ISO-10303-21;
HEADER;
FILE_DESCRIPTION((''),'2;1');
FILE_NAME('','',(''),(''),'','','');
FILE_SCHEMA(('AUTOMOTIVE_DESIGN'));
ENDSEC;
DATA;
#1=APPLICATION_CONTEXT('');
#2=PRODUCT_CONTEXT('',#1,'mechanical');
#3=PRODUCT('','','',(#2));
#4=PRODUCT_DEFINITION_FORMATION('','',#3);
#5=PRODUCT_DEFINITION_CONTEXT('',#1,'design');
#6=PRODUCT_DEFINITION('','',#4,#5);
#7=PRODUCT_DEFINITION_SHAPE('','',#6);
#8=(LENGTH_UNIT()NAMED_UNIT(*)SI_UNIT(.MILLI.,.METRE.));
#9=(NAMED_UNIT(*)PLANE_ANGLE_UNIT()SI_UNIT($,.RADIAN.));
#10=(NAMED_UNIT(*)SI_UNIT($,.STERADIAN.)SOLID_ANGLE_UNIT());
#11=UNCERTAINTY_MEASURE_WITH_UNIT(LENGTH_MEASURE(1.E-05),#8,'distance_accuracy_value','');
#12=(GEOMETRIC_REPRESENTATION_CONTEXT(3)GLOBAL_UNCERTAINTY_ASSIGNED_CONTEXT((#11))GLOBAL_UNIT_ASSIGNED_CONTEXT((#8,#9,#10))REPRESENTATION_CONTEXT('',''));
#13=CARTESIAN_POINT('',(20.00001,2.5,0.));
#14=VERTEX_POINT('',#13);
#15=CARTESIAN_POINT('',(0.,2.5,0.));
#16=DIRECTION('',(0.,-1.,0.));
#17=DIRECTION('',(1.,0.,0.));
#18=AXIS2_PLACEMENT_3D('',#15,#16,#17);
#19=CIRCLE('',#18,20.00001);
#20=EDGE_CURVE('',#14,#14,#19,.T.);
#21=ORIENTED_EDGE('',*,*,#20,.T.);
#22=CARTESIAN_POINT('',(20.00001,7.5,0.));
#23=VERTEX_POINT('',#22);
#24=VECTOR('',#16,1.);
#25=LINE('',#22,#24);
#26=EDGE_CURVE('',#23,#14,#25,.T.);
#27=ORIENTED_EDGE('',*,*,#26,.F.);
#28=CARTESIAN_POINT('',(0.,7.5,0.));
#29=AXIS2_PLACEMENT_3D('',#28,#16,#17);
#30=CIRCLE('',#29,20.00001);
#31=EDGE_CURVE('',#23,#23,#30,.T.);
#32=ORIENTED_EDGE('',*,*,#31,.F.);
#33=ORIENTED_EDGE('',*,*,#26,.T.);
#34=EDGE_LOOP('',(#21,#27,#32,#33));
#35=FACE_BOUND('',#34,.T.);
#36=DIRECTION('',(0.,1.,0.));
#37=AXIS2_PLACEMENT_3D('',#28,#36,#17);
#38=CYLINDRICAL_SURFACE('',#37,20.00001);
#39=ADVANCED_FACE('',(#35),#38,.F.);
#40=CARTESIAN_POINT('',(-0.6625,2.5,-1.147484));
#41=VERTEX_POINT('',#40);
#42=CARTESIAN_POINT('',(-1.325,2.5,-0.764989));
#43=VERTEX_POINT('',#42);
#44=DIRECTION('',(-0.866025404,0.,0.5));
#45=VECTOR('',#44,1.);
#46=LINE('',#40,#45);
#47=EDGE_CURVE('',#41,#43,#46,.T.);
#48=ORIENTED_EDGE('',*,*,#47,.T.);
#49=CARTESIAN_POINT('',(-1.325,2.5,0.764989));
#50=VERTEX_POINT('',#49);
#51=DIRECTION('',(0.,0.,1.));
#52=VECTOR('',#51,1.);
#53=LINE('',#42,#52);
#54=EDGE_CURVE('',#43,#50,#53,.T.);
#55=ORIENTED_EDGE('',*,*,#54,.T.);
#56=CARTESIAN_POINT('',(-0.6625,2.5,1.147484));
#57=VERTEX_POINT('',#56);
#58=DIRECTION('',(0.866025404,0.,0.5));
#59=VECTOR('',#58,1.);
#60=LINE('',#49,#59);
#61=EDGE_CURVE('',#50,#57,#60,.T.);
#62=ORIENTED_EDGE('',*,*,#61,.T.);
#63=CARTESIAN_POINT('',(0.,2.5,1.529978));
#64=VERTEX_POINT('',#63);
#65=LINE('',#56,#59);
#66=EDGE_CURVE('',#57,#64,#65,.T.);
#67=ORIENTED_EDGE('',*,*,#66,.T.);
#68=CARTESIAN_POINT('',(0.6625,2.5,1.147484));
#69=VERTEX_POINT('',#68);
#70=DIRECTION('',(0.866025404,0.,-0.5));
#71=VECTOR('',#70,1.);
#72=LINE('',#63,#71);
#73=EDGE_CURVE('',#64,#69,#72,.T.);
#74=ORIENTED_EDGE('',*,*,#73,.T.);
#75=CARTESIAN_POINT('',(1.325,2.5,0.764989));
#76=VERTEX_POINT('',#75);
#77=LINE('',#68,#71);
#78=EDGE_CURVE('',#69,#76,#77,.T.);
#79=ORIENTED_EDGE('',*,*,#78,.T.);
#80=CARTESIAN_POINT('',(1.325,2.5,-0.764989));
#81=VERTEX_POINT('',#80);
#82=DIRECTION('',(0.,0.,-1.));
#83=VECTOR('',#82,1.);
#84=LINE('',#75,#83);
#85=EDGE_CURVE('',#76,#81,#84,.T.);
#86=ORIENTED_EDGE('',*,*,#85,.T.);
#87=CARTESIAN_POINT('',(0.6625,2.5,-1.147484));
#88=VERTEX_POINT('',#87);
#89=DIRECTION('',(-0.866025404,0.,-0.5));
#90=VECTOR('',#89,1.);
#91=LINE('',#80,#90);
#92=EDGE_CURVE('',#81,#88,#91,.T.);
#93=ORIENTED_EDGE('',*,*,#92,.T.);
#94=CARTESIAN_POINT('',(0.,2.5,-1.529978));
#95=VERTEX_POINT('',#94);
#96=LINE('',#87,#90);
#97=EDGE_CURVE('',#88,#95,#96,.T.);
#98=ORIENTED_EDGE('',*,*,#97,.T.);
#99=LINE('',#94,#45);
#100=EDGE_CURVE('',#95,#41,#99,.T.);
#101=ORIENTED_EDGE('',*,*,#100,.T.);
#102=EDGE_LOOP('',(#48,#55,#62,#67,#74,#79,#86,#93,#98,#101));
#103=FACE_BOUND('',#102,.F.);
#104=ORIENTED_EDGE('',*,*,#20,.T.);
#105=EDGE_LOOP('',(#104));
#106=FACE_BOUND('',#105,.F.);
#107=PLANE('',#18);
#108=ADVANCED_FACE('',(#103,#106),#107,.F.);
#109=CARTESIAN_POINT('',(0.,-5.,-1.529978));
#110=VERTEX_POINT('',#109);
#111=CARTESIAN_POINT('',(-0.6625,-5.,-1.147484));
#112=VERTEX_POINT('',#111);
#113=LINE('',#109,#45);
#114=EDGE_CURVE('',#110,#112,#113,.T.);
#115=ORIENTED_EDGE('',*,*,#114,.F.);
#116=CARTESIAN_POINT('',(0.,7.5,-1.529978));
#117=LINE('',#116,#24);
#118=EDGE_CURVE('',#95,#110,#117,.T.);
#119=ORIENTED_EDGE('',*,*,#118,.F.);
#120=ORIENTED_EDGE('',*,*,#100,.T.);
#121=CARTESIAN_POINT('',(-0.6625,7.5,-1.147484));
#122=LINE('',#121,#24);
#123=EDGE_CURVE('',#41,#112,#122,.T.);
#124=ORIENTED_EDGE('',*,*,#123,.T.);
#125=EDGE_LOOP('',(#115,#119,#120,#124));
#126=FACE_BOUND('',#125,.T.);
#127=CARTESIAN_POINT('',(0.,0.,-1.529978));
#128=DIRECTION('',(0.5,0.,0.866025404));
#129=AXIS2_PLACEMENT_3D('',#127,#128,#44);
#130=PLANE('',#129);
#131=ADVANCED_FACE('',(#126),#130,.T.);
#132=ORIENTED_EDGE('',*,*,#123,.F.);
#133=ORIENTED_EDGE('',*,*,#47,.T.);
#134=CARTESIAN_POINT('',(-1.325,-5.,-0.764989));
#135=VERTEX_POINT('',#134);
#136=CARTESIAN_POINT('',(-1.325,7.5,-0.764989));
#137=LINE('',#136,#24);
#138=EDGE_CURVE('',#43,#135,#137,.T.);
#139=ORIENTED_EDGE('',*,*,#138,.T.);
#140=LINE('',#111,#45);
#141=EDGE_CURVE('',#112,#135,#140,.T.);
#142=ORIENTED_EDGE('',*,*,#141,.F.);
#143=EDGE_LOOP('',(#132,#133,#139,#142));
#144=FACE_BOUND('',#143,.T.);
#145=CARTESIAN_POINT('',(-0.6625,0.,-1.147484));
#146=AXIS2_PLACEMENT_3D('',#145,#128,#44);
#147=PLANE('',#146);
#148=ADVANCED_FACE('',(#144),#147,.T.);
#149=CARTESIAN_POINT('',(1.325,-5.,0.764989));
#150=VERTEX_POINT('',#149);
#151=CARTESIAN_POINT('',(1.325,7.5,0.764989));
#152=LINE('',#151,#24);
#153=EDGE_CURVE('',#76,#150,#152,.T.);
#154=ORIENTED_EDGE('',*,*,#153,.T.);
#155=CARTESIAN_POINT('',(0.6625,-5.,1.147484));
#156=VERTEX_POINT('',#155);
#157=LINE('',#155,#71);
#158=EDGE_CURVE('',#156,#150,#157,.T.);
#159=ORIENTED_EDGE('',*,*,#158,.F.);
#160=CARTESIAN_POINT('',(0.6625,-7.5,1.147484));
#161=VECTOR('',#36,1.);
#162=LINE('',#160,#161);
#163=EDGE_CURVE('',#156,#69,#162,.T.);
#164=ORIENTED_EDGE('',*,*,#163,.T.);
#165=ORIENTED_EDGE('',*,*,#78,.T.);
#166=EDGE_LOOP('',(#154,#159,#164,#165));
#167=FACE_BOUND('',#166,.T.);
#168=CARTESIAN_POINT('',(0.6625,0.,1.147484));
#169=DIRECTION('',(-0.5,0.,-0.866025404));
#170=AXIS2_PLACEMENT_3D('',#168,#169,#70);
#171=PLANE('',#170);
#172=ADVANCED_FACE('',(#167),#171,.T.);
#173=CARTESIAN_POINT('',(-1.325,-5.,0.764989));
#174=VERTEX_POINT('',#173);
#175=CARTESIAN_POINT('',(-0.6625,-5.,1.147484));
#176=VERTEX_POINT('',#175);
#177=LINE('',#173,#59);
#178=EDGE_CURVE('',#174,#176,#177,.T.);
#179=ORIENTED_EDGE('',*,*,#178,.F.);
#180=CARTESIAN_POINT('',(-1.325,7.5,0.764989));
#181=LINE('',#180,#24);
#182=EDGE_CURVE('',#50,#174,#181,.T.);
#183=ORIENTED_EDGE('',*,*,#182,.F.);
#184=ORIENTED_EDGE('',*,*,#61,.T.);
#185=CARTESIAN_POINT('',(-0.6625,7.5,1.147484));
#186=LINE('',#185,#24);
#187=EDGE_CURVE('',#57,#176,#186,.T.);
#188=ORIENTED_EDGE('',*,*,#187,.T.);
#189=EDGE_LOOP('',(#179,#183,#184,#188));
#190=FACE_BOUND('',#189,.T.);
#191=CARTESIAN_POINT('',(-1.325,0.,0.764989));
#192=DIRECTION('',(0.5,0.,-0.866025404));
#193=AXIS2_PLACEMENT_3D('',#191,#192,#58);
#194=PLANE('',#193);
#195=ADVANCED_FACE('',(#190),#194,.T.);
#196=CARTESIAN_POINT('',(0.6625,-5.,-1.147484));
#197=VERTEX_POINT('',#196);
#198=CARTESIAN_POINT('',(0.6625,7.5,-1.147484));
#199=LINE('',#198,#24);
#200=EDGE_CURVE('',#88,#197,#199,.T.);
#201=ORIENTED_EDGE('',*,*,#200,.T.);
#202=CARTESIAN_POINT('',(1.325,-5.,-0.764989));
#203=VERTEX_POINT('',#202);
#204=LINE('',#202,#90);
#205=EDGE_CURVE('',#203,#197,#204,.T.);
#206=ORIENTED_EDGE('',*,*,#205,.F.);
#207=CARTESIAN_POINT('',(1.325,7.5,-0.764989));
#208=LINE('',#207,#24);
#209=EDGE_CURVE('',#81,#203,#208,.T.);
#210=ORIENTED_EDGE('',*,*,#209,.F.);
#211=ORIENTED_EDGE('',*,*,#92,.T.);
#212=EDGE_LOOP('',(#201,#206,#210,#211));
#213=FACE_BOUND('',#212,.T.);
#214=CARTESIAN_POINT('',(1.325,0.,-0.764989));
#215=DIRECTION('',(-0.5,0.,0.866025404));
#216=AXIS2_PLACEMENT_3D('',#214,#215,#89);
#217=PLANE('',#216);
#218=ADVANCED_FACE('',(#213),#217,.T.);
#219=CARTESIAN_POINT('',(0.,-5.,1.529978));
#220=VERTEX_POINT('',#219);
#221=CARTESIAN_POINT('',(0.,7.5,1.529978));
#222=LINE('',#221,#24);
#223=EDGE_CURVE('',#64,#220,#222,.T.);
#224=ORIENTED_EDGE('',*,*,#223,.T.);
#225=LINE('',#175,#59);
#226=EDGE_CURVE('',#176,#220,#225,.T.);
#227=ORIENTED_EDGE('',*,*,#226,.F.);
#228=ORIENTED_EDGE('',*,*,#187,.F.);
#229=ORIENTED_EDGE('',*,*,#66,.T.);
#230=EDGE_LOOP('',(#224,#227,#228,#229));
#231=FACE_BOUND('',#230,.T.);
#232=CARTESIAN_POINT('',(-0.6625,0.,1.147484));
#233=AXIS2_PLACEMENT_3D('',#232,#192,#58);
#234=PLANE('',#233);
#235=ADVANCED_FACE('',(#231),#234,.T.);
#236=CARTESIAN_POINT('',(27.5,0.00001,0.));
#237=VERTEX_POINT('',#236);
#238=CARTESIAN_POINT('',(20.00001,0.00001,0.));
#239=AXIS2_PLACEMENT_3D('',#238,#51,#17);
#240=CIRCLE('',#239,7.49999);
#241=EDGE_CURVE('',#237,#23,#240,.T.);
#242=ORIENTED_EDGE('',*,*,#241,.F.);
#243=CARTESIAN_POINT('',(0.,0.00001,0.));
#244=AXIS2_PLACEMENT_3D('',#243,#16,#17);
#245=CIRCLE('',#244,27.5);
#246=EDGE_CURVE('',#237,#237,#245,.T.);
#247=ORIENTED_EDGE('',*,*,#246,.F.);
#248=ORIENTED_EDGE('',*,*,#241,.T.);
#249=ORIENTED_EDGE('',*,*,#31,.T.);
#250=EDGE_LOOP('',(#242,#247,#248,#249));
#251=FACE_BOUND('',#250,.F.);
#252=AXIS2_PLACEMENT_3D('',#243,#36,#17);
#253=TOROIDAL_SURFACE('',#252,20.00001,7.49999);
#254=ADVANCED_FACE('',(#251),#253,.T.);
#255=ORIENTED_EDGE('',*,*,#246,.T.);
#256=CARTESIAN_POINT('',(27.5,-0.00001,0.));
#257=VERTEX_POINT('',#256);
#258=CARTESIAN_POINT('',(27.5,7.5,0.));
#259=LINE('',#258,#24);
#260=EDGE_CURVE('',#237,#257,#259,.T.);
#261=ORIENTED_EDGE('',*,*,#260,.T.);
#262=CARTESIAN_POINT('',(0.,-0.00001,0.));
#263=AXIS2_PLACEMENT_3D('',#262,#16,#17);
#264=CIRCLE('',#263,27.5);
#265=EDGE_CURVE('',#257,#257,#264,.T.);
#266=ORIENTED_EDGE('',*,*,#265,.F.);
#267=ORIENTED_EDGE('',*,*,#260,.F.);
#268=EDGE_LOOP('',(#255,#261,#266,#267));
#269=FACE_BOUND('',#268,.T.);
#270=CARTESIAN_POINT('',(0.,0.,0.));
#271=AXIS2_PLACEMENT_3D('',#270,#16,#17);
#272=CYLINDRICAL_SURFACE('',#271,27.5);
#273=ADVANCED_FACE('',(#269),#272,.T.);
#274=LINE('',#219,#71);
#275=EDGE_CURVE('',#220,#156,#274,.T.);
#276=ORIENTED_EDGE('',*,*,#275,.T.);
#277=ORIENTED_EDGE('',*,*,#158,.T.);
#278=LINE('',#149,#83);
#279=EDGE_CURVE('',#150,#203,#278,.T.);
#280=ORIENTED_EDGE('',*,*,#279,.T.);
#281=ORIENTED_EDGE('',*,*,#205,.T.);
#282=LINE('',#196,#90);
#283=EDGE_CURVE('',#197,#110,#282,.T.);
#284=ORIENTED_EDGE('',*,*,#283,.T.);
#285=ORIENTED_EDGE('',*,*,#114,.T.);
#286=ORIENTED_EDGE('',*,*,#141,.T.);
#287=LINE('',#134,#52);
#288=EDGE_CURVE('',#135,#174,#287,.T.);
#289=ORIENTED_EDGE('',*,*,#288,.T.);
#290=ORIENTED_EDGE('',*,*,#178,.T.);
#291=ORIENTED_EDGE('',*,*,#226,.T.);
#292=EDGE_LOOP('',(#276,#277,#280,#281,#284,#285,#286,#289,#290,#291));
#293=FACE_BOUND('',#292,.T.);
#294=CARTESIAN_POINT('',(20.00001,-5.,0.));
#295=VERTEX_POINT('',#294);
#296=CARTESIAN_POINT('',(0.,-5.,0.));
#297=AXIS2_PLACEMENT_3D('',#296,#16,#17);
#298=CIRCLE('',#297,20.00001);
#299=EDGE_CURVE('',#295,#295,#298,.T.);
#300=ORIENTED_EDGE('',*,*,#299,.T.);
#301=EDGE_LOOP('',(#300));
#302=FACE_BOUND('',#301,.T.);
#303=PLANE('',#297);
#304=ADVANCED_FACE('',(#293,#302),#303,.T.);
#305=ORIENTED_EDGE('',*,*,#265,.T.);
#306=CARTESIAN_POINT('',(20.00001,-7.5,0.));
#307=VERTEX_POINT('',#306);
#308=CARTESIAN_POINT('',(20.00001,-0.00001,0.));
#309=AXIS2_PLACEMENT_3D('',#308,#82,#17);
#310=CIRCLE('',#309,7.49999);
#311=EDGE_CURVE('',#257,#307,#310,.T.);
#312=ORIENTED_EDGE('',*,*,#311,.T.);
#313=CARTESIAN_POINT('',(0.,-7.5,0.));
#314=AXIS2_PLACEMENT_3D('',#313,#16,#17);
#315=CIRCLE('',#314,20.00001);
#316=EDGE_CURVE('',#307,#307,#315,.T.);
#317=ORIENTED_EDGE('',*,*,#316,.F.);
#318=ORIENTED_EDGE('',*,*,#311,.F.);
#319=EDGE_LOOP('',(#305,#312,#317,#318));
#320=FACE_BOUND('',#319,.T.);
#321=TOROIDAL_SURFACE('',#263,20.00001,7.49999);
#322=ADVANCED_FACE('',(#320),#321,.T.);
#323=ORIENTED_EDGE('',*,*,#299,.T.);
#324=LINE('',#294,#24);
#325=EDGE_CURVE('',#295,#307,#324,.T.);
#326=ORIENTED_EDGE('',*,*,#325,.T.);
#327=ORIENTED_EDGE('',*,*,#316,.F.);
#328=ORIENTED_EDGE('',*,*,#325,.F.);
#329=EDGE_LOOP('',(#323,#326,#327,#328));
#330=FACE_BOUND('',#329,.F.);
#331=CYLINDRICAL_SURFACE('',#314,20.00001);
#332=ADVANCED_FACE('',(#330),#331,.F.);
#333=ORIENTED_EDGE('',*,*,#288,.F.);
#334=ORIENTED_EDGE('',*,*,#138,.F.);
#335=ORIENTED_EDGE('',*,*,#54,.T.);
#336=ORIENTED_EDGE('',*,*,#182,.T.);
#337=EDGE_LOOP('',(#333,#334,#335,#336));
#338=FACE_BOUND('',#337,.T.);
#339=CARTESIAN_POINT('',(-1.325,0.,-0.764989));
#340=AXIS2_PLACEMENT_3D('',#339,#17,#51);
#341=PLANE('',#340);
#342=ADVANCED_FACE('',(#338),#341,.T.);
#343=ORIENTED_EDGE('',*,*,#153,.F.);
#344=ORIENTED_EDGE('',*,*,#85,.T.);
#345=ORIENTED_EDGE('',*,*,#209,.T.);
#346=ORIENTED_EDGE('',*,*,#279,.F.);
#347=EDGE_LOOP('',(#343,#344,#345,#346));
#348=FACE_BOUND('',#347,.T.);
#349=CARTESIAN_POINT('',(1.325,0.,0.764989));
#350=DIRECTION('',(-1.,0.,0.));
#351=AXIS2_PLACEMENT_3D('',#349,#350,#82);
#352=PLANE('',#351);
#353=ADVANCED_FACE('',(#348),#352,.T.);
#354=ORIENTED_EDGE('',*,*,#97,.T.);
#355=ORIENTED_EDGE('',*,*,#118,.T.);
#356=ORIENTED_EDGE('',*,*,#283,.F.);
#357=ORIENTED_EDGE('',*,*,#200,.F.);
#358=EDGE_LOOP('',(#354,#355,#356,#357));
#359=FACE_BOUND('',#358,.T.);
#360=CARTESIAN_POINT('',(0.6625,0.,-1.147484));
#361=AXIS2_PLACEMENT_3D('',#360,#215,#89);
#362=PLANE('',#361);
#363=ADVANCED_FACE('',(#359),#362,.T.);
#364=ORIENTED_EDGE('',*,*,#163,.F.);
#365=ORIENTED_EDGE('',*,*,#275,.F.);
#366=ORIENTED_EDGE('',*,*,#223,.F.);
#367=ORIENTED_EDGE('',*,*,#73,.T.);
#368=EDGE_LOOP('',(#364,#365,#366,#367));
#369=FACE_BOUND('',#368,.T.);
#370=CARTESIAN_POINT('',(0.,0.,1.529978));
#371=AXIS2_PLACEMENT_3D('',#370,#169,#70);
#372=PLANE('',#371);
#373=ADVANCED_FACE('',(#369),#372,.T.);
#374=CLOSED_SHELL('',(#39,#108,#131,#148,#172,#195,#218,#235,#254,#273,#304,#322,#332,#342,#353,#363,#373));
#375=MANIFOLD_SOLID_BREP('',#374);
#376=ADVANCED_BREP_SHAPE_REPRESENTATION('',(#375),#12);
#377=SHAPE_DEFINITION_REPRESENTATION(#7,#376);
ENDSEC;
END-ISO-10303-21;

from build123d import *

# Parameters (mm, degrees)
F0_R     = 27.5
F1_DEPTH = 7.5
F2_R     = 7.49999
F3_DEPTH = 2.5
F4_DEPTH = 5


# Not quite as in the source:
# - a fillet or chamfer is up to 0.001 mm smaller than in the source, because OpenCascade refuses the exact size


with BuildPart() as f1:
    # F0 (on Front) → F1 (new body, symmetric)
    with BuildSketch(Plane.XZ):
        Circle(F0_R)
        Polygon((1.325, 0.7649891067), (1.325, 0), (1.325, -0.7649891067), (0.6624999921, -1.1474836645), (0, -1.5299782134), (-0.6624999921, -1.1474836645), (-1.325, -0.7649891067), (-1.325, 0), (-1.325, 0.7649891067), (-0.6624999921, 1.1474836645), (0, 1.5299782134), (0.6624999921, 1.1474836645), align=None, mode=Mode.SUBTRACT)
    extrude(amount=F1_DEPTH, both=True)

    # F2 (radius 7.5 in the source; OpenCascade refuses exactly that, so slightly less here)
    f2_edges = [f1.edges().sort_by_distance(p)[0] for p in [
        (-27.5, -7.5, 0),
        (-27.5, 7.5, 0),
    ]]
    fillet(f2_edges, radius=F2_R)

    # F3 (cut, symmetric): a face of the model
    f3_faces = [f1.faces().sort_by_distance(p)[0] for p in [
        (-19.4343242922, -7.5, 0),
    ]]
    extrude(f3_faces, amount=F3_DEPTH, both=True, mode=Mode.SUBTRACT)

    # F4 (cut): a face of the model
    f4_faces = [f1.faces().sort_by_distance(p)[0] for p in [
        (-19.4343242922, 7.5, 0),
    ]]
    extrude(f4_faces, amount=-F4_DEPTH, mode=Mode.SUBTRACT)


solid = f1.part
